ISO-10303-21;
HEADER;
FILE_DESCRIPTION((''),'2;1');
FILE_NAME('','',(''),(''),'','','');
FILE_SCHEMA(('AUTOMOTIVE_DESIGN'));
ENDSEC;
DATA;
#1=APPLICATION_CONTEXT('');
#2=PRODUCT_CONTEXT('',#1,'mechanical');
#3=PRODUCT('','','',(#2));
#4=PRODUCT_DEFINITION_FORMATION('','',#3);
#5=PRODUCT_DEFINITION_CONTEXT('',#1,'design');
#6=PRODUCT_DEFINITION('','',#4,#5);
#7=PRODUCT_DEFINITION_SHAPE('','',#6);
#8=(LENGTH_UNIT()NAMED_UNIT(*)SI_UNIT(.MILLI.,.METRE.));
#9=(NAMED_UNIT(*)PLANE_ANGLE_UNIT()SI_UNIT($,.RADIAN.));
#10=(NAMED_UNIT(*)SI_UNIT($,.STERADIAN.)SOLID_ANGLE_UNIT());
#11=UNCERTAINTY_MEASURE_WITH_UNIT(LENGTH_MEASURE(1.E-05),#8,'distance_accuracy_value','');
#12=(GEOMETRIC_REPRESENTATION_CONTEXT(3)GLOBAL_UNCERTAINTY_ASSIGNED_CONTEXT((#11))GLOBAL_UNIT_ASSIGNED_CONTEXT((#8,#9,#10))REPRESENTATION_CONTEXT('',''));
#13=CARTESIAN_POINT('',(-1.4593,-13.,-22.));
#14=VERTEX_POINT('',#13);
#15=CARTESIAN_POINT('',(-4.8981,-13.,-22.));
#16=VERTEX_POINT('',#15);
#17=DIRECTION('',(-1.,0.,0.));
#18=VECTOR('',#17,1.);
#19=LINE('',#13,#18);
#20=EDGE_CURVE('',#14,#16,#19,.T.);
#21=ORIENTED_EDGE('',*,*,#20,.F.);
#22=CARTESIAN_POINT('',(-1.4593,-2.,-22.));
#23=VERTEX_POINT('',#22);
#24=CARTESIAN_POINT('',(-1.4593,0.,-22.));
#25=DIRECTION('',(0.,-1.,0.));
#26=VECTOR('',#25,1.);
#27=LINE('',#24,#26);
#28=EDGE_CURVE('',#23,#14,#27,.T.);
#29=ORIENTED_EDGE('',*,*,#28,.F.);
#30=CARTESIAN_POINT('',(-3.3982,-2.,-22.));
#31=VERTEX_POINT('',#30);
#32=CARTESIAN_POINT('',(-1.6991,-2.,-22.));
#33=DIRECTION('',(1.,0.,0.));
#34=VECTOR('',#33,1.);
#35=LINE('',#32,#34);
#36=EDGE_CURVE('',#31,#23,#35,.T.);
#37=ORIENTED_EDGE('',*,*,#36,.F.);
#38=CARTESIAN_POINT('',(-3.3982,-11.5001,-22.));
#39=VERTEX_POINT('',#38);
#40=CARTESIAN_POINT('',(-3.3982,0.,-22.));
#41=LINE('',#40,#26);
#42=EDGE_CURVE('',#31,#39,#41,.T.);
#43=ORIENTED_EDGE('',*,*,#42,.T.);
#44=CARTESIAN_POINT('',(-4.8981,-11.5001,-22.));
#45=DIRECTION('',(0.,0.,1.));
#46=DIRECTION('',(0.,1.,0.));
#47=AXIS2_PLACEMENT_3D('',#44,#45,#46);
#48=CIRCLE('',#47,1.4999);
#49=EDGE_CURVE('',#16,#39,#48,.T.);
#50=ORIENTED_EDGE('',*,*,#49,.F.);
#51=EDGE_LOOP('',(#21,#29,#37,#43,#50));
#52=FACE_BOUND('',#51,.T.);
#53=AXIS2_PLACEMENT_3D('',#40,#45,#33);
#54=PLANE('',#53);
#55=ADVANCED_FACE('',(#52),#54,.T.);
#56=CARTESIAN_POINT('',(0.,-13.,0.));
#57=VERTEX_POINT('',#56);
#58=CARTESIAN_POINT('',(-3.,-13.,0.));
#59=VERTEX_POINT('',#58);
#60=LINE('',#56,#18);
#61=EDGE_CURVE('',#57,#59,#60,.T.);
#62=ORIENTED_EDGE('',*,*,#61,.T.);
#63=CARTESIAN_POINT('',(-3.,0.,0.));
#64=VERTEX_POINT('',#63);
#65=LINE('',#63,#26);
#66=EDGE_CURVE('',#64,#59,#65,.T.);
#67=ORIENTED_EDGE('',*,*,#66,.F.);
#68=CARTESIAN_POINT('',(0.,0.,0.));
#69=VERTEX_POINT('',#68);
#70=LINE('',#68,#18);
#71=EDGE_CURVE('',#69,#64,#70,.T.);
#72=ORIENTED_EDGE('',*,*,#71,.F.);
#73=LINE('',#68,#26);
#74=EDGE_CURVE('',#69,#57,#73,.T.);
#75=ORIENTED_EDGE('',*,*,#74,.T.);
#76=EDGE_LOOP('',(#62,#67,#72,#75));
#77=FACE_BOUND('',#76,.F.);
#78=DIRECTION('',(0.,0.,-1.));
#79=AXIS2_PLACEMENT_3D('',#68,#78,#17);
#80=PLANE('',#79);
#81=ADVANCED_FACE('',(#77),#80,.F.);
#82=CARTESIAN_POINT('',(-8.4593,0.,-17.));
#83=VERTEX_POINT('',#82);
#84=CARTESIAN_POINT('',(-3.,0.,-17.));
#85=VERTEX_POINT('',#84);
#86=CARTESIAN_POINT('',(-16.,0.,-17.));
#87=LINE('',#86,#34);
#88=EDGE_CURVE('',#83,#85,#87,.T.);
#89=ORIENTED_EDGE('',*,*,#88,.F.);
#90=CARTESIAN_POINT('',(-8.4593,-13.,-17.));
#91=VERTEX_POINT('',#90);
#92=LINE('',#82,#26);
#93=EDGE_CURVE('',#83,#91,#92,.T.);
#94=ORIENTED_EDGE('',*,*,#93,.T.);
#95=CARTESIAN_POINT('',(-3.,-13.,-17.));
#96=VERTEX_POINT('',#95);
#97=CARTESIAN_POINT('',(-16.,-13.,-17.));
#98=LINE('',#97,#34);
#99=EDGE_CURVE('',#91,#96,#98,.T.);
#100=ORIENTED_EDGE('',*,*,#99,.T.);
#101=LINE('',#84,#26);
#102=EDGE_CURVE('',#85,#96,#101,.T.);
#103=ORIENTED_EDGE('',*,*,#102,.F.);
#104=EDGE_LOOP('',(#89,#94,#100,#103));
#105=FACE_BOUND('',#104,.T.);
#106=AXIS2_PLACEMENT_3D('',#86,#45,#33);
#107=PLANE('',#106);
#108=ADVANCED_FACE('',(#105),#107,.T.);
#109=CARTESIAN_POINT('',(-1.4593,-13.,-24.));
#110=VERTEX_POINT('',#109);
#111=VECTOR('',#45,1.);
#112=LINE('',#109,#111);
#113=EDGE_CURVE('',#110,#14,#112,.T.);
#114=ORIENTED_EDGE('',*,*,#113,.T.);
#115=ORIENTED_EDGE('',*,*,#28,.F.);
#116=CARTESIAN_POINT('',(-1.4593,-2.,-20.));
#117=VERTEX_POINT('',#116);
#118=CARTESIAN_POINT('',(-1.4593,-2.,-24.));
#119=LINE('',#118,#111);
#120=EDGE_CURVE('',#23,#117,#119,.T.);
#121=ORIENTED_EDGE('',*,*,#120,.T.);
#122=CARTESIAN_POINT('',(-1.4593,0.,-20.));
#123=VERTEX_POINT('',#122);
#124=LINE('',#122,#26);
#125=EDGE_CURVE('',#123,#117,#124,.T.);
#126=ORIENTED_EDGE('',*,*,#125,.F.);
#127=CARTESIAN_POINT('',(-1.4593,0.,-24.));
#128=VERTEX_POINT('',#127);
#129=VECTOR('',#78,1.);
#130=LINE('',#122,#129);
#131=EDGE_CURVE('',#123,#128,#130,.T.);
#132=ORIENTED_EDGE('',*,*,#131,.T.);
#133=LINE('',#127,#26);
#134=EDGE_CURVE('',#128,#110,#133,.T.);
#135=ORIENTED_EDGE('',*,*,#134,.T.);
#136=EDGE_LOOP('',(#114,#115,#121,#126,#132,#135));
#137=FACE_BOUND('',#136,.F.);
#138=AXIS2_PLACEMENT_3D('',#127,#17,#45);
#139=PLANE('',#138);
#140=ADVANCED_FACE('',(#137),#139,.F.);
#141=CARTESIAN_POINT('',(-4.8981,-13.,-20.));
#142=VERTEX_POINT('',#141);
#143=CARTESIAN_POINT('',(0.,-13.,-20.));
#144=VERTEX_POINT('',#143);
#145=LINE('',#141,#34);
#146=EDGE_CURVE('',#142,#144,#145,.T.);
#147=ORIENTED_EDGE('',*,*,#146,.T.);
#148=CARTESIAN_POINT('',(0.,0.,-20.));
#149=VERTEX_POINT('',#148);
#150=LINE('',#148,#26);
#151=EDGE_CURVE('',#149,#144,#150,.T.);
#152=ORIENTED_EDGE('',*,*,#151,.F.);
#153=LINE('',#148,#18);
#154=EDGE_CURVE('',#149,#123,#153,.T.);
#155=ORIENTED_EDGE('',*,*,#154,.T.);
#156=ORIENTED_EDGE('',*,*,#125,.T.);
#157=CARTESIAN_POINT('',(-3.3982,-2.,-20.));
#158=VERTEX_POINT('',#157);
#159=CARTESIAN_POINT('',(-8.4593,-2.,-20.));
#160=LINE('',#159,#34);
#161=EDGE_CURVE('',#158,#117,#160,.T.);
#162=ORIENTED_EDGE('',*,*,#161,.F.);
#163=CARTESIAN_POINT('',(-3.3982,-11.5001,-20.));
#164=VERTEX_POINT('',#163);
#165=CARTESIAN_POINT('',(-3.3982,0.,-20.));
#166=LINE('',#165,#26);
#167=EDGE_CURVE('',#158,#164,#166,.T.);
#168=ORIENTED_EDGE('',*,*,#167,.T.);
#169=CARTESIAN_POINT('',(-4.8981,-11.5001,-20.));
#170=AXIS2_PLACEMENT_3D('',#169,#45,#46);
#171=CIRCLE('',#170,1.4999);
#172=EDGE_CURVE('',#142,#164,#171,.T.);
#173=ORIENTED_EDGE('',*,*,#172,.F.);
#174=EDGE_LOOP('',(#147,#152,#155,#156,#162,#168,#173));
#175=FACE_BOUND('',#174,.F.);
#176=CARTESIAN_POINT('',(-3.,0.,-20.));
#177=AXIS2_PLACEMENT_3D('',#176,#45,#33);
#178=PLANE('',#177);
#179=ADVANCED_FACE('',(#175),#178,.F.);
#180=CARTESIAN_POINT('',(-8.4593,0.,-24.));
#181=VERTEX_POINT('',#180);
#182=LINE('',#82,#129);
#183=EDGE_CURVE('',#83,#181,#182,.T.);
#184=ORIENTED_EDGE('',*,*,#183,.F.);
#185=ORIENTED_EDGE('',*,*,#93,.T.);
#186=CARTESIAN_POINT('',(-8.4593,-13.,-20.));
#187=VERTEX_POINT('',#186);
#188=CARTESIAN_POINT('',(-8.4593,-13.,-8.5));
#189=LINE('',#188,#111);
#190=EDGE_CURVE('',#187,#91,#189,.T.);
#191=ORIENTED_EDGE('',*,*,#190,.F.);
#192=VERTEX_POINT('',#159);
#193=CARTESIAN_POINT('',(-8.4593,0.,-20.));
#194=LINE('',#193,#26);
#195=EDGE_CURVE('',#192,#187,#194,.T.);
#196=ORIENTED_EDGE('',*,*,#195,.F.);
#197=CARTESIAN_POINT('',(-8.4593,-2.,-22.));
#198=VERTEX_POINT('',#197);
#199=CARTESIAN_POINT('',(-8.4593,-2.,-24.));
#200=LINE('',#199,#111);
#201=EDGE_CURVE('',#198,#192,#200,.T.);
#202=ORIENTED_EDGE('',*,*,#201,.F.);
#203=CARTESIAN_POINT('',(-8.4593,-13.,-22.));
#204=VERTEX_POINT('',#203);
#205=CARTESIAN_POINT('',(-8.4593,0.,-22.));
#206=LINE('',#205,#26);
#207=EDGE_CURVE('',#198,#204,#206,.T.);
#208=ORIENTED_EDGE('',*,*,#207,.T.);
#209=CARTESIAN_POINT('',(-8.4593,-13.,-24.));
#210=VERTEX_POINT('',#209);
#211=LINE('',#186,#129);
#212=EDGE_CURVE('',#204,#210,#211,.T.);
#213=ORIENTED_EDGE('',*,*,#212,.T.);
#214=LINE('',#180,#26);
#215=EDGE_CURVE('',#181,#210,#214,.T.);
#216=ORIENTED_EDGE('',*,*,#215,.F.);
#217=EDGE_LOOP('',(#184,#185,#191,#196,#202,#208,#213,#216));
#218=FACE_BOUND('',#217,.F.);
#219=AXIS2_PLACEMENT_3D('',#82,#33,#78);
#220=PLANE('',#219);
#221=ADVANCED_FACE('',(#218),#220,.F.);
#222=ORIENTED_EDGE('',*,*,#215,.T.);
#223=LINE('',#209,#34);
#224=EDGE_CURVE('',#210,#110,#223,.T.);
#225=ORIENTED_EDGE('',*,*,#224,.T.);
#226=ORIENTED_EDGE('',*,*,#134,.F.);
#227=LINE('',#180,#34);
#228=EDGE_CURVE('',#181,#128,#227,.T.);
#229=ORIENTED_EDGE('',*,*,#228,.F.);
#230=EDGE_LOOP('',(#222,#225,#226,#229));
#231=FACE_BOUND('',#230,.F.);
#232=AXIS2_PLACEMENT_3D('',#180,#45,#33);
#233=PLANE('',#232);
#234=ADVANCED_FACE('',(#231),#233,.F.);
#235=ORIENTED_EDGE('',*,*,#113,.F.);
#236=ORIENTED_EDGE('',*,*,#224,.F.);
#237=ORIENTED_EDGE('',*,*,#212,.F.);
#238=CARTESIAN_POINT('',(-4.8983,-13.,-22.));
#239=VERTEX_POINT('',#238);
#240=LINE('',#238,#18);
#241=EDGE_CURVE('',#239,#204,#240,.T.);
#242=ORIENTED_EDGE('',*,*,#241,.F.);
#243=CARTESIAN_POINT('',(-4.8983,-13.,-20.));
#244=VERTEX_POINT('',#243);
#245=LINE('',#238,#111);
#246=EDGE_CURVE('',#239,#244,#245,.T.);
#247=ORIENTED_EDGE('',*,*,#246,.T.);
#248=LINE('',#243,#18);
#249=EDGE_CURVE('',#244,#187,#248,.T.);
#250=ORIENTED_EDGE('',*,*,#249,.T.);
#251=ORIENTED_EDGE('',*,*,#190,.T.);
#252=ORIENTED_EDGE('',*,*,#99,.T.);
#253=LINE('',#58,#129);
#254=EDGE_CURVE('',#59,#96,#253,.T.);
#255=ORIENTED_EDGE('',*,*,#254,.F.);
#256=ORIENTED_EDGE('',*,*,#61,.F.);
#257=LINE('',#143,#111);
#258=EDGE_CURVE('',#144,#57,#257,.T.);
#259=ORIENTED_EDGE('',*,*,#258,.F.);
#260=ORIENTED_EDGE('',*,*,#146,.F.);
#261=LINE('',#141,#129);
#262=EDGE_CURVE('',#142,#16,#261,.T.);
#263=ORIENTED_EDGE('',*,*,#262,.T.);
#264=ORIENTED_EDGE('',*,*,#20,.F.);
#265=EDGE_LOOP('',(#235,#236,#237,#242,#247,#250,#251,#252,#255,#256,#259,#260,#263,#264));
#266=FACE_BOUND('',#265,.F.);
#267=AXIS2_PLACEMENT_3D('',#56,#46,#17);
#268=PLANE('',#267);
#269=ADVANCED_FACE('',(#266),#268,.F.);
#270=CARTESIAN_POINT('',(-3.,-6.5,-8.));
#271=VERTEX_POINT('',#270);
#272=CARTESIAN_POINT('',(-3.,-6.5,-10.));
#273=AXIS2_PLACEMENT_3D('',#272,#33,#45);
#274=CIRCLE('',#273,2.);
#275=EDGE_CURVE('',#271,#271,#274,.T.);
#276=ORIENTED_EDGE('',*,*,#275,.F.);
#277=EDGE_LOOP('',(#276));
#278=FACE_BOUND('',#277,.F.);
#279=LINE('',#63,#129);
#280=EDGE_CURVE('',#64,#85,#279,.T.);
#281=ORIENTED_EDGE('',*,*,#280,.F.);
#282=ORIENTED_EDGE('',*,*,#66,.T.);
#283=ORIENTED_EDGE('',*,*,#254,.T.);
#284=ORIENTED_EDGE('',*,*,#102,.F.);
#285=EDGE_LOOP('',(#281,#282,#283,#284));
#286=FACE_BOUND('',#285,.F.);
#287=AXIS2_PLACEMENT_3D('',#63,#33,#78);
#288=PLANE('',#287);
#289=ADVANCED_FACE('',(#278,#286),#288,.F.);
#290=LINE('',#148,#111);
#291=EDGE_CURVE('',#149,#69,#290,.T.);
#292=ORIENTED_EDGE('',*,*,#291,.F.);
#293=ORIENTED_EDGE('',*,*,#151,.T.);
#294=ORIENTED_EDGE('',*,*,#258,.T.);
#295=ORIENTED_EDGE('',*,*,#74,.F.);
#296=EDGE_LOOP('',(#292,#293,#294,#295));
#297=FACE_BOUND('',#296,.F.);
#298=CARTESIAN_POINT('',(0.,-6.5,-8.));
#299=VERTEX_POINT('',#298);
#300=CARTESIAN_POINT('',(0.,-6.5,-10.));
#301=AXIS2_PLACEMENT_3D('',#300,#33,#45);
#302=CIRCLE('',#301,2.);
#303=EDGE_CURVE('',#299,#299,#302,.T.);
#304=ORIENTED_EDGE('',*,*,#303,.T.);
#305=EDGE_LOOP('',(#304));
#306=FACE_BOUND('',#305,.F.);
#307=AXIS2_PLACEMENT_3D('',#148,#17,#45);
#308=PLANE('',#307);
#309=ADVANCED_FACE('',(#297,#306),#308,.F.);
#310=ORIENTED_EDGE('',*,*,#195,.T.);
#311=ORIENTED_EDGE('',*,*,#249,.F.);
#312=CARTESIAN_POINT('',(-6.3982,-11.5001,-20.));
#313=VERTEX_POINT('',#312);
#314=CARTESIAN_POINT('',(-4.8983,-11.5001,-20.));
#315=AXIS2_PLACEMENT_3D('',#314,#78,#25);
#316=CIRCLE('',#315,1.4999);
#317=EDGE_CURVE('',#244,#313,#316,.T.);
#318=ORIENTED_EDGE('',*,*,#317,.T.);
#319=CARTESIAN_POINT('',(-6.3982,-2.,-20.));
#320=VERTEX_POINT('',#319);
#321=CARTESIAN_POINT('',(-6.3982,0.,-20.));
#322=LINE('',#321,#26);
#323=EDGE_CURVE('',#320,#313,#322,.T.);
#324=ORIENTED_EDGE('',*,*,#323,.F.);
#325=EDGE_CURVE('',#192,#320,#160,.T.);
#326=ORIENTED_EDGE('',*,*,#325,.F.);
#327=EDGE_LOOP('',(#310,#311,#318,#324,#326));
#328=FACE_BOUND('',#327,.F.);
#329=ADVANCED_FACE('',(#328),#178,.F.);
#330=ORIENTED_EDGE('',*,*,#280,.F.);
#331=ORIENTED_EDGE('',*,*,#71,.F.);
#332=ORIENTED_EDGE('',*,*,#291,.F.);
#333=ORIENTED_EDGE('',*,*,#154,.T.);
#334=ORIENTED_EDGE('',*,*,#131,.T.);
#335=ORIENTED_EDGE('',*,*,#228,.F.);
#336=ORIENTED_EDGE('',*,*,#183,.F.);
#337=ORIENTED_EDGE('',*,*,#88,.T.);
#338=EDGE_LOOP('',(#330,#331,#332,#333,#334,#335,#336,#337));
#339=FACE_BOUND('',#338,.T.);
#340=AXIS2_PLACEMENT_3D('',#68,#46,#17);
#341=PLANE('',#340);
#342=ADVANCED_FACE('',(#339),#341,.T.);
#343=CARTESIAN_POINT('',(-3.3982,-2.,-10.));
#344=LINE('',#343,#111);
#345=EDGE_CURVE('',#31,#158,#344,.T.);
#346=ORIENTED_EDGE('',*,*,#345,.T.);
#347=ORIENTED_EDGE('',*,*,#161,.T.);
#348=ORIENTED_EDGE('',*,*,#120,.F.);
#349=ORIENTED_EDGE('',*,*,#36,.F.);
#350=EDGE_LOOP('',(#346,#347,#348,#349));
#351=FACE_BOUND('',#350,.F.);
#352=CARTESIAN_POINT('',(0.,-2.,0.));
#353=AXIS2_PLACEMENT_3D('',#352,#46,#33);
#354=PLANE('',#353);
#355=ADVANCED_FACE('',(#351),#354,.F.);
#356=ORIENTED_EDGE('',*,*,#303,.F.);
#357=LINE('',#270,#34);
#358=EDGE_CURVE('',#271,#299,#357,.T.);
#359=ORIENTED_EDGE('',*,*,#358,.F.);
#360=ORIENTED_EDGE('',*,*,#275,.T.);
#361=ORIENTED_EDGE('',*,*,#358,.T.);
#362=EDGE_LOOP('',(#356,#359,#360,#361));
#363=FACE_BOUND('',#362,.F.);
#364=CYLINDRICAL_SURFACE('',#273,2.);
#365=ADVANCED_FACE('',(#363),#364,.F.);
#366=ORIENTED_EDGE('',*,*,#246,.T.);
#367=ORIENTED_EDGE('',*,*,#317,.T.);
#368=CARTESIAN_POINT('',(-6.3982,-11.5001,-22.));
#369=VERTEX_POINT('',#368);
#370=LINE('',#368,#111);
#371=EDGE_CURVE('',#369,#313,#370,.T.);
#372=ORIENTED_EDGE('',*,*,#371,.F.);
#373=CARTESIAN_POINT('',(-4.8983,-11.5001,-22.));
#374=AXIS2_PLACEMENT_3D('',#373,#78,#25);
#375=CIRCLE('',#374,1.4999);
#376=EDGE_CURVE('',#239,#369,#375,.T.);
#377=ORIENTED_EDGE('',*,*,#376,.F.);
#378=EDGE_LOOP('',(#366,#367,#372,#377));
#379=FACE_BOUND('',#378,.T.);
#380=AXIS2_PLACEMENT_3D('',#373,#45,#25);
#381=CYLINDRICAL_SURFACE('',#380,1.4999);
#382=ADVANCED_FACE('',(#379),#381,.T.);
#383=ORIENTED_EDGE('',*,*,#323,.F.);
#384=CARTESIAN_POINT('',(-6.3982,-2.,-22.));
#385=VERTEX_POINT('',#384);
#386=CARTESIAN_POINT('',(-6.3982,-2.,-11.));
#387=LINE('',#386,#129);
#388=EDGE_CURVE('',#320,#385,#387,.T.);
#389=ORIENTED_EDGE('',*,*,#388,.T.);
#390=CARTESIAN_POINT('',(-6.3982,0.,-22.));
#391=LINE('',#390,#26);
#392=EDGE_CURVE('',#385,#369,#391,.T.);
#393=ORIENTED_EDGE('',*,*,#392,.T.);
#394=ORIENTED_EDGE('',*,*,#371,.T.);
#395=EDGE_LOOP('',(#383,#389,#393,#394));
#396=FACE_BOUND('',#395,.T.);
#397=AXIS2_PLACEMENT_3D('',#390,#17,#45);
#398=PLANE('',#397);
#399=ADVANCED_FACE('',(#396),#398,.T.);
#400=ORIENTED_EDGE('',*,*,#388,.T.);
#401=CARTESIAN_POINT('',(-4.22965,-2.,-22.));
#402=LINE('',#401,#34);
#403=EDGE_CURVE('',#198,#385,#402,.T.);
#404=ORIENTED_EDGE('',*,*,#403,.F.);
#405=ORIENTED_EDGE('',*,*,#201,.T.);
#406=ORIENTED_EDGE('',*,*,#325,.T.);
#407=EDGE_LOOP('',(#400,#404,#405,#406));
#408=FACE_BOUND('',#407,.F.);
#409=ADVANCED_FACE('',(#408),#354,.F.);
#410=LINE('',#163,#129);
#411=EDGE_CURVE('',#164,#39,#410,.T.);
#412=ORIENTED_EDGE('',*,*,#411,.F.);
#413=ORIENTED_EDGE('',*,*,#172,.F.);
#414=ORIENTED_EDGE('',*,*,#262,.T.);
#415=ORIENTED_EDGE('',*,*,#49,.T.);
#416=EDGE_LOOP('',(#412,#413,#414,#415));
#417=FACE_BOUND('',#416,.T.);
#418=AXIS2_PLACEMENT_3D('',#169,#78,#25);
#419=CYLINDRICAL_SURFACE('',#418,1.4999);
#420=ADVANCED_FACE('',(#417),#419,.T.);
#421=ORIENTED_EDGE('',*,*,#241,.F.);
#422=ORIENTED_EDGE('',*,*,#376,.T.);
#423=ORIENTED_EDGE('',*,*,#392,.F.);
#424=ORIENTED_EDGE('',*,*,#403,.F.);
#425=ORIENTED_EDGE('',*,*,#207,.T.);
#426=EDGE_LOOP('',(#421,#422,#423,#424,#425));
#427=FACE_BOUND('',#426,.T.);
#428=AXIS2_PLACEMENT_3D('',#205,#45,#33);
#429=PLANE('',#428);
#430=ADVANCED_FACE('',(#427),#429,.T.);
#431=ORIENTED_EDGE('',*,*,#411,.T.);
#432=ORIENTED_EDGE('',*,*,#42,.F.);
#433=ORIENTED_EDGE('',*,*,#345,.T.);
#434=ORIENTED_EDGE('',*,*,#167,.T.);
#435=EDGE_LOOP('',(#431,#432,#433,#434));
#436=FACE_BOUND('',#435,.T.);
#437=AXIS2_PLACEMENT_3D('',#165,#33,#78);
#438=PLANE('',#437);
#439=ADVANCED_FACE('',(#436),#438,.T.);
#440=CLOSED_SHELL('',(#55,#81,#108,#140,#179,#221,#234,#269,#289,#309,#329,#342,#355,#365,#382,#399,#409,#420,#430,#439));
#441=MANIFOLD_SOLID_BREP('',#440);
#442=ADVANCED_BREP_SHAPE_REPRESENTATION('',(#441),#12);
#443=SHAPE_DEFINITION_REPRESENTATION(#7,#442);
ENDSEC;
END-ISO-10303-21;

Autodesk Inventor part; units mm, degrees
ref_plane "YZ Plane" through (0, 0, 0) normal (1, 0, 0) x (0, 1, 0)
ref_plane "XZ Plane" through (0, 0, 0) normal (0, 1, 0) x (-1, 0, 0)
ref_plane "XY Plane" through (0, 0, 0) normal (0, 0, 1) x (1, 0, 0)
sketch "Sketch1" plane through (0, 0, 0) normal (0, 1, 0) x (-1, 0, 0)
  line L0 (0, 0) -> (3, 0)
  line L1 (3, 0) -> (3, -20)
  line L2 (3, -20) -> (0, -20)
  line L3 (0, -20) -> (0, 0)
  line L4 (3, -20) -> (16, -20)
  line L5 (16, -20) -> (16, -17)
  line L6 (16, -17) -> (3, -17)
  line L7 (3, -17) -> (3, -20)
  dimension "d0" = 3
  dimension "d1" = 20
  dimension "d2" = 13
  dimension "d3" = 3
extrude "Extrusion1" add sketch "Sketch1" against normal blind 13
sketch "Sketch2" plane through (0, 0, 0) normal (0, 1, 0) x (1, 0, 0)
  line L0 (-16, 20) -> (0, 20) projected
  line L1 (0, 0) -> (0, 20) projected
  line L2 (-6.3982, 20) -> (-3.3982, 20)
  line L3 (-3.3982, 20) -> (-3.3982, 22)
  line L4 (-3.3982, 22) -> (-6.3982, 22)
  line L5 (-6.3982, 22) -> (-6.3982, 20)
  line L6 (-6.3982, 20) -> (-3.3982, 22) construction
  line L7 (-6.3982, 22) -> (-3.3982, 20) construction
  line L8 (0, 20) -> (-16, 20) projected
  line L9 (-1.4593, 20) -> (-8.4593, 20)
  line L10 (-8.4593, 20) -> (-8.4593, 24)
  line L11 (-8.4593, 24) -> (-1.4593, 24)
  line L12 (-1.4593, 24) -> (-1.4593, 20)
  line L13 (-8.4593, 22) -> (-1.4593, 22)
  point P0 (-4.8982, 20)
  point P1 (-4.8982, 21)
  dimension "d6" = 4.8982
  dimension "d7" = 3
  dimension "d8" = 2
  dimension "d9" = 7
  dimension "d10" = 4
extrude "Extrusion2" add sketch "Sketch2" against normal up to surface (13 mm away) contours L5 L4 L3 L0
extrude "Extrusion3" add sketch "Sketch2" against normal blind 2
extrude "Extrusion4" add sketch "Sketch2" against normal up to surface (13 mm away) contours L10 L11 L12 L13 L4
fillet "Fillet1" radius 1.5 2 edges at (-6.3982, -13, -21) (-3.3982, -13, -21)
sketch "Sketch3" plane through (0, 0, 0) normal (0, 1, 0) x (1, 0, 0)
  line L0 (-16, 17) -> (-3, 17) projected
  line L1 (-8.4593, 20) -> (-16, 20) projected
  line L2 (-16, 17) -> (-8.4593, 17)
  line L3 (-8.4593, 17) -> (-8.4593, 20)
  line L4 (-8.4593, 20) -> (-16, 20)
  line L5 (-16, 20) -> (-16, 17)
  point P0 (0, 0)
extrude "Extrusion5" cut sketch "Sketch3" against normal up to next
sketch "Sketch7" plane through (-3, 0, -17) normal (-1, 0, 0) x (0, 0, 1)
  line L0 (0, 0) -> (17, 0) projected
  line L1 (17, 0) -> (17, -13) projected
  point P0 (7, -6.5)
  dimension "d41" = 6.5
  dimension "d42" = 10
hole "Hole2" at (-3, -6.5, -10) direction (1, 0, 0) diameter 4 end through all
properties part number "bloceur_alim"
